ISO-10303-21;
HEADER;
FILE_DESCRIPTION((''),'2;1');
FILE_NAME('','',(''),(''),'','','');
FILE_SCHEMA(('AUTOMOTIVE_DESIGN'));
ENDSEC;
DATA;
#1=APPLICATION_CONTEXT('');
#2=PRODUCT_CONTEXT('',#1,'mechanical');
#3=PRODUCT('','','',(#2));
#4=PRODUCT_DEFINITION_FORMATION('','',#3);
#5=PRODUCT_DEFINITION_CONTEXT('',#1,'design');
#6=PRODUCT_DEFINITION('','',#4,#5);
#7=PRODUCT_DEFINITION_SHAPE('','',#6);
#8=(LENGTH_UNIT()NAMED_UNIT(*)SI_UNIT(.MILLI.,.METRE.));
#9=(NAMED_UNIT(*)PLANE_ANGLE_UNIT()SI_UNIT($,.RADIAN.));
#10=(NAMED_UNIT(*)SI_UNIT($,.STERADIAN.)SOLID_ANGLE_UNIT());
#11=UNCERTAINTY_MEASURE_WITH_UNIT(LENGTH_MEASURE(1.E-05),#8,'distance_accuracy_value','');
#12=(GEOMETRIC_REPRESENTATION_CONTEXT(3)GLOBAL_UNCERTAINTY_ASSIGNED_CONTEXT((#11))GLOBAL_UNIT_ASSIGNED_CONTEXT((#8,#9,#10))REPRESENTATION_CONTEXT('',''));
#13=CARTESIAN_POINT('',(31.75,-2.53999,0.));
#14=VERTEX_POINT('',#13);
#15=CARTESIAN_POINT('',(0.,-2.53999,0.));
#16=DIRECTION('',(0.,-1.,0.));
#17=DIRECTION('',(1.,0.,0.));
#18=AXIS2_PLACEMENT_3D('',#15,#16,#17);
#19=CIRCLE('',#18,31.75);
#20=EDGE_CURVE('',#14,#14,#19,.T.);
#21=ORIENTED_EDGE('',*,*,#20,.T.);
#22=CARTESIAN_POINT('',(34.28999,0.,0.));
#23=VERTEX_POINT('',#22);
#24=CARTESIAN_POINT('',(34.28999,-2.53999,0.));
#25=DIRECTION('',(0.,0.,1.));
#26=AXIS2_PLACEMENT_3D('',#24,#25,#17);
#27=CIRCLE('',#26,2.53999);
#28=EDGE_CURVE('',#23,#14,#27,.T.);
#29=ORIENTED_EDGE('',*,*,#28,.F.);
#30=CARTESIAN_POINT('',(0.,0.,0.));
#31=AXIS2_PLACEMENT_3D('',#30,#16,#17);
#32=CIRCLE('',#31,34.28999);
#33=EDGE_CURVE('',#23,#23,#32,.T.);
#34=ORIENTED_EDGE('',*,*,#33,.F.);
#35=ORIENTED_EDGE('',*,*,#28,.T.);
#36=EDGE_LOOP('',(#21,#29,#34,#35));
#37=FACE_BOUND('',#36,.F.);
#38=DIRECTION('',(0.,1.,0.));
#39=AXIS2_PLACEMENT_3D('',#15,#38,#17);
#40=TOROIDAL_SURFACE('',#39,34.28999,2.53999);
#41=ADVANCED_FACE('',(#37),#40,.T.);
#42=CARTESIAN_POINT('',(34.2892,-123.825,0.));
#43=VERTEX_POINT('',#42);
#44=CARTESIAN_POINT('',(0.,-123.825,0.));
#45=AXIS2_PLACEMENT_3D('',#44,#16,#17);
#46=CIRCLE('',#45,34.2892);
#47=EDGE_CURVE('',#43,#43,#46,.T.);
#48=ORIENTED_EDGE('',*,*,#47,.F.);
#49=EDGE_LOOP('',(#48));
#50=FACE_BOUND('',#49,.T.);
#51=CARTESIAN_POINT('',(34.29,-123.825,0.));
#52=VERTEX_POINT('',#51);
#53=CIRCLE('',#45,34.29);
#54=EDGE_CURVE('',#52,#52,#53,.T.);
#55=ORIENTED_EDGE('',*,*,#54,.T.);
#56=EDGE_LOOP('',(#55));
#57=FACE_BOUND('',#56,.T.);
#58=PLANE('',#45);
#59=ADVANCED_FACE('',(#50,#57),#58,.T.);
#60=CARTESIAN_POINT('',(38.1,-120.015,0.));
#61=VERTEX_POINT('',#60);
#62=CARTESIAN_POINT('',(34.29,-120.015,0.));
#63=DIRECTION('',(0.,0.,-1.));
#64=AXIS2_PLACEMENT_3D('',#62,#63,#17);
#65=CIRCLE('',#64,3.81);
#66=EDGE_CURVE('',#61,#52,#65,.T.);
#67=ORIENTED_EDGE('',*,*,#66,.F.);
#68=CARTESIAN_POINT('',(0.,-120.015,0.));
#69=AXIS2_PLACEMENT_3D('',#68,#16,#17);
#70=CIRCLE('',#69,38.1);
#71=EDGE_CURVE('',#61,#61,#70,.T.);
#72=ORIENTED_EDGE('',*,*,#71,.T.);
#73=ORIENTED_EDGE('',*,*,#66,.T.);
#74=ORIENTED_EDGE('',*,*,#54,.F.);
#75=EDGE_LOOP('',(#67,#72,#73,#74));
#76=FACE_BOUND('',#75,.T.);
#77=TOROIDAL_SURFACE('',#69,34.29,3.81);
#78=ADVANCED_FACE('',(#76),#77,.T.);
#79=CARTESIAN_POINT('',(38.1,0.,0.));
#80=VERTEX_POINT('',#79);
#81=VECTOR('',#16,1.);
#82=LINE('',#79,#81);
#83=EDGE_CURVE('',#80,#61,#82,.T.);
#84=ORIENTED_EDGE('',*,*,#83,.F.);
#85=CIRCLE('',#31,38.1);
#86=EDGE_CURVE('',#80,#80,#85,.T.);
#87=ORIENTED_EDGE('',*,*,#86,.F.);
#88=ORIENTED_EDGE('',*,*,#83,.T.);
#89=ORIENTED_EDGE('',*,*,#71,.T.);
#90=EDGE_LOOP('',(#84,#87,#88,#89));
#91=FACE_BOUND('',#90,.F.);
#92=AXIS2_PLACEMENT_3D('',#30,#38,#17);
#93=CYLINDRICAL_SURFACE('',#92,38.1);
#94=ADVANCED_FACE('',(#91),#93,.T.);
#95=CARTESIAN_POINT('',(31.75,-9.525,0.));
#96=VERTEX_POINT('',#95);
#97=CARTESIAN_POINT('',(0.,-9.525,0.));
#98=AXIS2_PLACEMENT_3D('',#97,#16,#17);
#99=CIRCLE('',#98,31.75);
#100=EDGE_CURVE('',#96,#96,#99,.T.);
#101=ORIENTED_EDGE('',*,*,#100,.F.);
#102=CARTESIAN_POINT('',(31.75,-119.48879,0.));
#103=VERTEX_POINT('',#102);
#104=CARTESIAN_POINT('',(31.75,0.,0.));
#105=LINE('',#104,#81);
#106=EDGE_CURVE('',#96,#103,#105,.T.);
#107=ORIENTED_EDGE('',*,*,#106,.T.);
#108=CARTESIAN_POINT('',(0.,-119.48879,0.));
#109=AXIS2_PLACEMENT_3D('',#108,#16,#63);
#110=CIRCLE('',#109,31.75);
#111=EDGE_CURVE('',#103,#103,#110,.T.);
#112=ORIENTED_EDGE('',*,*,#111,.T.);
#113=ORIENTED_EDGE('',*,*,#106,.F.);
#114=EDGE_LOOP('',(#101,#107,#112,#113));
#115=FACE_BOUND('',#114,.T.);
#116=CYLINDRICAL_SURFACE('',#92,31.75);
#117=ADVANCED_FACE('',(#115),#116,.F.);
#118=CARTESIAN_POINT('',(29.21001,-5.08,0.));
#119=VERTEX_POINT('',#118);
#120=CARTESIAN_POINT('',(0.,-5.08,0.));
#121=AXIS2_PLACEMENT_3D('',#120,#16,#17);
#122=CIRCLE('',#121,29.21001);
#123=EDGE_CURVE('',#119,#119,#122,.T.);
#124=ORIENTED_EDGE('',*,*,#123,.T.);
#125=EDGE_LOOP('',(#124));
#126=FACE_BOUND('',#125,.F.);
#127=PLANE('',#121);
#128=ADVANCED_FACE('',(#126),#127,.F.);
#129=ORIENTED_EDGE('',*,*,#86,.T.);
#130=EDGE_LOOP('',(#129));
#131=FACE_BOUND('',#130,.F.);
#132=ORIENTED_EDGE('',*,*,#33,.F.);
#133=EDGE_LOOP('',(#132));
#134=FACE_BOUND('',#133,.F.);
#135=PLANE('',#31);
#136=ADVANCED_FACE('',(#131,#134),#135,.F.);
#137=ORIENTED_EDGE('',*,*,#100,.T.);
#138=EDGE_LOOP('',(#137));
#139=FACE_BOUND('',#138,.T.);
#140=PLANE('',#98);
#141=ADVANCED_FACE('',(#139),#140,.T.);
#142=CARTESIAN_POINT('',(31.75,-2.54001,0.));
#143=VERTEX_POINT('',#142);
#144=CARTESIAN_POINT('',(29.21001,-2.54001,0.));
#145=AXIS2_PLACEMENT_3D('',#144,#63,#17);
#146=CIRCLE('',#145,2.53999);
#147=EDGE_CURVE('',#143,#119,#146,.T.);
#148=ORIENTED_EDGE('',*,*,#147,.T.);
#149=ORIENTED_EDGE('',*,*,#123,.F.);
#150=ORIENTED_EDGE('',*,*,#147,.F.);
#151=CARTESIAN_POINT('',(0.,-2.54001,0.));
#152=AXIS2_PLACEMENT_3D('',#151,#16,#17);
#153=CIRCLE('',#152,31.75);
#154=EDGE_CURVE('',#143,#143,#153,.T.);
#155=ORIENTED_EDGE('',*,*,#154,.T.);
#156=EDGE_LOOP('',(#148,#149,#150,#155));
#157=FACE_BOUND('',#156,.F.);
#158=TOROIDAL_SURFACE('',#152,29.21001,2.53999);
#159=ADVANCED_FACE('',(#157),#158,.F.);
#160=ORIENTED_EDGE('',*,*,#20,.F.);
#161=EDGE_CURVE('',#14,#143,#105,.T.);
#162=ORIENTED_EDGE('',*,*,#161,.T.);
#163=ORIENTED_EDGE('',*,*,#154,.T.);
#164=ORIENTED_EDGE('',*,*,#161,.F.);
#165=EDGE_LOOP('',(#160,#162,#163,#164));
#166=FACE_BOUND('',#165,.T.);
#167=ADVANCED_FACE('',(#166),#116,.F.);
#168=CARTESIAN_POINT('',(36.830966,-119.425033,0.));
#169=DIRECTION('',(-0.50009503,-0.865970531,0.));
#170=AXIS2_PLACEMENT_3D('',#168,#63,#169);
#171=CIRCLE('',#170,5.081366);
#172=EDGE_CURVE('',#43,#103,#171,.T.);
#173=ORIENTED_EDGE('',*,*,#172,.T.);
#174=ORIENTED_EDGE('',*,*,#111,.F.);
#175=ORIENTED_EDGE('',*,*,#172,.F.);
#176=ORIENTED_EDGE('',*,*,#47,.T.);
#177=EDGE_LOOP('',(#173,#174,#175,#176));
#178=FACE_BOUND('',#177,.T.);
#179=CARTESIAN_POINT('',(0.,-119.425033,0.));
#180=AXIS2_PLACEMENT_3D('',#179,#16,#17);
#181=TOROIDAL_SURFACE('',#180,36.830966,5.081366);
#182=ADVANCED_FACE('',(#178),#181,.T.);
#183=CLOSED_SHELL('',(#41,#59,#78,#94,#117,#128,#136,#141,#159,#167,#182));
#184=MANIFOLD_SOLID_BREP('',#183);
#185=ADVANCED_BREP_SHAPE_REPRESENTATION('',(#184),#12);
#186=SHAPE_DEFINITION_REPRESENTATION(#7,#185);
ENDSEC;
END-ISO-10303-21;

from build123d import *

# Parameters (mm, degrees)
F0_R     = 38.1
F0_R_2   = 31.75
F1_DEPTH = 123.825
F2_DEPTH = 9.525
F3_R     = 3.81
F5_DEPTH = 5.08
F6_R     = 2.53999


# Not quite as in the source:
# - a fillet or chamfer that OpenCascade refuses, or shapes differently, is made with other operations: its cross-section is extruded or revolved along the edge and cut away or added
# - a fillet or chamfer is up to 0.001 mm smaller than in the source, because OpenCascade refuses the exact size


with BuildPart() as f1:
    # F0 (on Front) → F1 (new body)
    with BuildSketch(Plane.XZ):
        Circle(F0_R)
        Circle(F0_R_2, mode=Mode.SUBTRACT)
    extrude(amount=F1_DEPTH)

    # F0 (on Front) → F2 (join)
    with BuildSketch(Plane.XZ):
        Circle(F0_R_2)
    extrude(amount=F2_DEPTH)

    # F3
    f3_edges = [f1.edges().sort_by_distance(p)[0] for p in [
        (-38.1, -123.825, 0),
    ]]
    fillet(f3_edges, radius=F3_R)

    # F4: fillet of radius 5.08 on 1 edges, made by hand

    # F4_s1 → F4_t2 (revolve, cut)
    with BuildSketch(Plane.XY):
        with BuildLine():
            ThreePointArc((34.289799962, -123.8253463882), (32.4302345225, -121.9654748362), (31.7496, -119.4250334454))
            Line((31.7496, -119.4250334454), (31.2414634315, -119.4250334454))
            ThreePointArc((31.2414634315, -119.4250334454), (31.2418634315, -121.6250167227), (31.2418634315, -123.825))
            Line((31.2418634315, -123.825), (31.75, -124.3331365685))
            ThreePointArc((31.75, -124.3331365685), (33.019899981, -124.3331365685), (34.0356833896, -124.2653776825))
            Line((34.0356833896, -124.2653776825), (34.289799962, -123.8253463882))
        make_face()
    revolve(axis=Axis((0, -123.825, 0), (0, -1, 0)), mode=Mode.SUBTRACT)

    # F0 (on Front) → F5 (cut)
    with BuildSketch(Plane.XZ):
        Circle(F0_R_2)
    extrude(amount=F5_DEPTH, mode=Mode.SUBTRACT)

    # F6 (radius 2.54 in the source; OpenCascade refuses exactly that, so slightly less here)
    f6_edges = [f1.edges().sort_by_distance(p)[0] for p in [
        (-31.75, -5.08, 0),
        (-31.75, 0, 0),
    ]]
    fillet(f6_edges, radius=F6_R)


solid = f1.part
